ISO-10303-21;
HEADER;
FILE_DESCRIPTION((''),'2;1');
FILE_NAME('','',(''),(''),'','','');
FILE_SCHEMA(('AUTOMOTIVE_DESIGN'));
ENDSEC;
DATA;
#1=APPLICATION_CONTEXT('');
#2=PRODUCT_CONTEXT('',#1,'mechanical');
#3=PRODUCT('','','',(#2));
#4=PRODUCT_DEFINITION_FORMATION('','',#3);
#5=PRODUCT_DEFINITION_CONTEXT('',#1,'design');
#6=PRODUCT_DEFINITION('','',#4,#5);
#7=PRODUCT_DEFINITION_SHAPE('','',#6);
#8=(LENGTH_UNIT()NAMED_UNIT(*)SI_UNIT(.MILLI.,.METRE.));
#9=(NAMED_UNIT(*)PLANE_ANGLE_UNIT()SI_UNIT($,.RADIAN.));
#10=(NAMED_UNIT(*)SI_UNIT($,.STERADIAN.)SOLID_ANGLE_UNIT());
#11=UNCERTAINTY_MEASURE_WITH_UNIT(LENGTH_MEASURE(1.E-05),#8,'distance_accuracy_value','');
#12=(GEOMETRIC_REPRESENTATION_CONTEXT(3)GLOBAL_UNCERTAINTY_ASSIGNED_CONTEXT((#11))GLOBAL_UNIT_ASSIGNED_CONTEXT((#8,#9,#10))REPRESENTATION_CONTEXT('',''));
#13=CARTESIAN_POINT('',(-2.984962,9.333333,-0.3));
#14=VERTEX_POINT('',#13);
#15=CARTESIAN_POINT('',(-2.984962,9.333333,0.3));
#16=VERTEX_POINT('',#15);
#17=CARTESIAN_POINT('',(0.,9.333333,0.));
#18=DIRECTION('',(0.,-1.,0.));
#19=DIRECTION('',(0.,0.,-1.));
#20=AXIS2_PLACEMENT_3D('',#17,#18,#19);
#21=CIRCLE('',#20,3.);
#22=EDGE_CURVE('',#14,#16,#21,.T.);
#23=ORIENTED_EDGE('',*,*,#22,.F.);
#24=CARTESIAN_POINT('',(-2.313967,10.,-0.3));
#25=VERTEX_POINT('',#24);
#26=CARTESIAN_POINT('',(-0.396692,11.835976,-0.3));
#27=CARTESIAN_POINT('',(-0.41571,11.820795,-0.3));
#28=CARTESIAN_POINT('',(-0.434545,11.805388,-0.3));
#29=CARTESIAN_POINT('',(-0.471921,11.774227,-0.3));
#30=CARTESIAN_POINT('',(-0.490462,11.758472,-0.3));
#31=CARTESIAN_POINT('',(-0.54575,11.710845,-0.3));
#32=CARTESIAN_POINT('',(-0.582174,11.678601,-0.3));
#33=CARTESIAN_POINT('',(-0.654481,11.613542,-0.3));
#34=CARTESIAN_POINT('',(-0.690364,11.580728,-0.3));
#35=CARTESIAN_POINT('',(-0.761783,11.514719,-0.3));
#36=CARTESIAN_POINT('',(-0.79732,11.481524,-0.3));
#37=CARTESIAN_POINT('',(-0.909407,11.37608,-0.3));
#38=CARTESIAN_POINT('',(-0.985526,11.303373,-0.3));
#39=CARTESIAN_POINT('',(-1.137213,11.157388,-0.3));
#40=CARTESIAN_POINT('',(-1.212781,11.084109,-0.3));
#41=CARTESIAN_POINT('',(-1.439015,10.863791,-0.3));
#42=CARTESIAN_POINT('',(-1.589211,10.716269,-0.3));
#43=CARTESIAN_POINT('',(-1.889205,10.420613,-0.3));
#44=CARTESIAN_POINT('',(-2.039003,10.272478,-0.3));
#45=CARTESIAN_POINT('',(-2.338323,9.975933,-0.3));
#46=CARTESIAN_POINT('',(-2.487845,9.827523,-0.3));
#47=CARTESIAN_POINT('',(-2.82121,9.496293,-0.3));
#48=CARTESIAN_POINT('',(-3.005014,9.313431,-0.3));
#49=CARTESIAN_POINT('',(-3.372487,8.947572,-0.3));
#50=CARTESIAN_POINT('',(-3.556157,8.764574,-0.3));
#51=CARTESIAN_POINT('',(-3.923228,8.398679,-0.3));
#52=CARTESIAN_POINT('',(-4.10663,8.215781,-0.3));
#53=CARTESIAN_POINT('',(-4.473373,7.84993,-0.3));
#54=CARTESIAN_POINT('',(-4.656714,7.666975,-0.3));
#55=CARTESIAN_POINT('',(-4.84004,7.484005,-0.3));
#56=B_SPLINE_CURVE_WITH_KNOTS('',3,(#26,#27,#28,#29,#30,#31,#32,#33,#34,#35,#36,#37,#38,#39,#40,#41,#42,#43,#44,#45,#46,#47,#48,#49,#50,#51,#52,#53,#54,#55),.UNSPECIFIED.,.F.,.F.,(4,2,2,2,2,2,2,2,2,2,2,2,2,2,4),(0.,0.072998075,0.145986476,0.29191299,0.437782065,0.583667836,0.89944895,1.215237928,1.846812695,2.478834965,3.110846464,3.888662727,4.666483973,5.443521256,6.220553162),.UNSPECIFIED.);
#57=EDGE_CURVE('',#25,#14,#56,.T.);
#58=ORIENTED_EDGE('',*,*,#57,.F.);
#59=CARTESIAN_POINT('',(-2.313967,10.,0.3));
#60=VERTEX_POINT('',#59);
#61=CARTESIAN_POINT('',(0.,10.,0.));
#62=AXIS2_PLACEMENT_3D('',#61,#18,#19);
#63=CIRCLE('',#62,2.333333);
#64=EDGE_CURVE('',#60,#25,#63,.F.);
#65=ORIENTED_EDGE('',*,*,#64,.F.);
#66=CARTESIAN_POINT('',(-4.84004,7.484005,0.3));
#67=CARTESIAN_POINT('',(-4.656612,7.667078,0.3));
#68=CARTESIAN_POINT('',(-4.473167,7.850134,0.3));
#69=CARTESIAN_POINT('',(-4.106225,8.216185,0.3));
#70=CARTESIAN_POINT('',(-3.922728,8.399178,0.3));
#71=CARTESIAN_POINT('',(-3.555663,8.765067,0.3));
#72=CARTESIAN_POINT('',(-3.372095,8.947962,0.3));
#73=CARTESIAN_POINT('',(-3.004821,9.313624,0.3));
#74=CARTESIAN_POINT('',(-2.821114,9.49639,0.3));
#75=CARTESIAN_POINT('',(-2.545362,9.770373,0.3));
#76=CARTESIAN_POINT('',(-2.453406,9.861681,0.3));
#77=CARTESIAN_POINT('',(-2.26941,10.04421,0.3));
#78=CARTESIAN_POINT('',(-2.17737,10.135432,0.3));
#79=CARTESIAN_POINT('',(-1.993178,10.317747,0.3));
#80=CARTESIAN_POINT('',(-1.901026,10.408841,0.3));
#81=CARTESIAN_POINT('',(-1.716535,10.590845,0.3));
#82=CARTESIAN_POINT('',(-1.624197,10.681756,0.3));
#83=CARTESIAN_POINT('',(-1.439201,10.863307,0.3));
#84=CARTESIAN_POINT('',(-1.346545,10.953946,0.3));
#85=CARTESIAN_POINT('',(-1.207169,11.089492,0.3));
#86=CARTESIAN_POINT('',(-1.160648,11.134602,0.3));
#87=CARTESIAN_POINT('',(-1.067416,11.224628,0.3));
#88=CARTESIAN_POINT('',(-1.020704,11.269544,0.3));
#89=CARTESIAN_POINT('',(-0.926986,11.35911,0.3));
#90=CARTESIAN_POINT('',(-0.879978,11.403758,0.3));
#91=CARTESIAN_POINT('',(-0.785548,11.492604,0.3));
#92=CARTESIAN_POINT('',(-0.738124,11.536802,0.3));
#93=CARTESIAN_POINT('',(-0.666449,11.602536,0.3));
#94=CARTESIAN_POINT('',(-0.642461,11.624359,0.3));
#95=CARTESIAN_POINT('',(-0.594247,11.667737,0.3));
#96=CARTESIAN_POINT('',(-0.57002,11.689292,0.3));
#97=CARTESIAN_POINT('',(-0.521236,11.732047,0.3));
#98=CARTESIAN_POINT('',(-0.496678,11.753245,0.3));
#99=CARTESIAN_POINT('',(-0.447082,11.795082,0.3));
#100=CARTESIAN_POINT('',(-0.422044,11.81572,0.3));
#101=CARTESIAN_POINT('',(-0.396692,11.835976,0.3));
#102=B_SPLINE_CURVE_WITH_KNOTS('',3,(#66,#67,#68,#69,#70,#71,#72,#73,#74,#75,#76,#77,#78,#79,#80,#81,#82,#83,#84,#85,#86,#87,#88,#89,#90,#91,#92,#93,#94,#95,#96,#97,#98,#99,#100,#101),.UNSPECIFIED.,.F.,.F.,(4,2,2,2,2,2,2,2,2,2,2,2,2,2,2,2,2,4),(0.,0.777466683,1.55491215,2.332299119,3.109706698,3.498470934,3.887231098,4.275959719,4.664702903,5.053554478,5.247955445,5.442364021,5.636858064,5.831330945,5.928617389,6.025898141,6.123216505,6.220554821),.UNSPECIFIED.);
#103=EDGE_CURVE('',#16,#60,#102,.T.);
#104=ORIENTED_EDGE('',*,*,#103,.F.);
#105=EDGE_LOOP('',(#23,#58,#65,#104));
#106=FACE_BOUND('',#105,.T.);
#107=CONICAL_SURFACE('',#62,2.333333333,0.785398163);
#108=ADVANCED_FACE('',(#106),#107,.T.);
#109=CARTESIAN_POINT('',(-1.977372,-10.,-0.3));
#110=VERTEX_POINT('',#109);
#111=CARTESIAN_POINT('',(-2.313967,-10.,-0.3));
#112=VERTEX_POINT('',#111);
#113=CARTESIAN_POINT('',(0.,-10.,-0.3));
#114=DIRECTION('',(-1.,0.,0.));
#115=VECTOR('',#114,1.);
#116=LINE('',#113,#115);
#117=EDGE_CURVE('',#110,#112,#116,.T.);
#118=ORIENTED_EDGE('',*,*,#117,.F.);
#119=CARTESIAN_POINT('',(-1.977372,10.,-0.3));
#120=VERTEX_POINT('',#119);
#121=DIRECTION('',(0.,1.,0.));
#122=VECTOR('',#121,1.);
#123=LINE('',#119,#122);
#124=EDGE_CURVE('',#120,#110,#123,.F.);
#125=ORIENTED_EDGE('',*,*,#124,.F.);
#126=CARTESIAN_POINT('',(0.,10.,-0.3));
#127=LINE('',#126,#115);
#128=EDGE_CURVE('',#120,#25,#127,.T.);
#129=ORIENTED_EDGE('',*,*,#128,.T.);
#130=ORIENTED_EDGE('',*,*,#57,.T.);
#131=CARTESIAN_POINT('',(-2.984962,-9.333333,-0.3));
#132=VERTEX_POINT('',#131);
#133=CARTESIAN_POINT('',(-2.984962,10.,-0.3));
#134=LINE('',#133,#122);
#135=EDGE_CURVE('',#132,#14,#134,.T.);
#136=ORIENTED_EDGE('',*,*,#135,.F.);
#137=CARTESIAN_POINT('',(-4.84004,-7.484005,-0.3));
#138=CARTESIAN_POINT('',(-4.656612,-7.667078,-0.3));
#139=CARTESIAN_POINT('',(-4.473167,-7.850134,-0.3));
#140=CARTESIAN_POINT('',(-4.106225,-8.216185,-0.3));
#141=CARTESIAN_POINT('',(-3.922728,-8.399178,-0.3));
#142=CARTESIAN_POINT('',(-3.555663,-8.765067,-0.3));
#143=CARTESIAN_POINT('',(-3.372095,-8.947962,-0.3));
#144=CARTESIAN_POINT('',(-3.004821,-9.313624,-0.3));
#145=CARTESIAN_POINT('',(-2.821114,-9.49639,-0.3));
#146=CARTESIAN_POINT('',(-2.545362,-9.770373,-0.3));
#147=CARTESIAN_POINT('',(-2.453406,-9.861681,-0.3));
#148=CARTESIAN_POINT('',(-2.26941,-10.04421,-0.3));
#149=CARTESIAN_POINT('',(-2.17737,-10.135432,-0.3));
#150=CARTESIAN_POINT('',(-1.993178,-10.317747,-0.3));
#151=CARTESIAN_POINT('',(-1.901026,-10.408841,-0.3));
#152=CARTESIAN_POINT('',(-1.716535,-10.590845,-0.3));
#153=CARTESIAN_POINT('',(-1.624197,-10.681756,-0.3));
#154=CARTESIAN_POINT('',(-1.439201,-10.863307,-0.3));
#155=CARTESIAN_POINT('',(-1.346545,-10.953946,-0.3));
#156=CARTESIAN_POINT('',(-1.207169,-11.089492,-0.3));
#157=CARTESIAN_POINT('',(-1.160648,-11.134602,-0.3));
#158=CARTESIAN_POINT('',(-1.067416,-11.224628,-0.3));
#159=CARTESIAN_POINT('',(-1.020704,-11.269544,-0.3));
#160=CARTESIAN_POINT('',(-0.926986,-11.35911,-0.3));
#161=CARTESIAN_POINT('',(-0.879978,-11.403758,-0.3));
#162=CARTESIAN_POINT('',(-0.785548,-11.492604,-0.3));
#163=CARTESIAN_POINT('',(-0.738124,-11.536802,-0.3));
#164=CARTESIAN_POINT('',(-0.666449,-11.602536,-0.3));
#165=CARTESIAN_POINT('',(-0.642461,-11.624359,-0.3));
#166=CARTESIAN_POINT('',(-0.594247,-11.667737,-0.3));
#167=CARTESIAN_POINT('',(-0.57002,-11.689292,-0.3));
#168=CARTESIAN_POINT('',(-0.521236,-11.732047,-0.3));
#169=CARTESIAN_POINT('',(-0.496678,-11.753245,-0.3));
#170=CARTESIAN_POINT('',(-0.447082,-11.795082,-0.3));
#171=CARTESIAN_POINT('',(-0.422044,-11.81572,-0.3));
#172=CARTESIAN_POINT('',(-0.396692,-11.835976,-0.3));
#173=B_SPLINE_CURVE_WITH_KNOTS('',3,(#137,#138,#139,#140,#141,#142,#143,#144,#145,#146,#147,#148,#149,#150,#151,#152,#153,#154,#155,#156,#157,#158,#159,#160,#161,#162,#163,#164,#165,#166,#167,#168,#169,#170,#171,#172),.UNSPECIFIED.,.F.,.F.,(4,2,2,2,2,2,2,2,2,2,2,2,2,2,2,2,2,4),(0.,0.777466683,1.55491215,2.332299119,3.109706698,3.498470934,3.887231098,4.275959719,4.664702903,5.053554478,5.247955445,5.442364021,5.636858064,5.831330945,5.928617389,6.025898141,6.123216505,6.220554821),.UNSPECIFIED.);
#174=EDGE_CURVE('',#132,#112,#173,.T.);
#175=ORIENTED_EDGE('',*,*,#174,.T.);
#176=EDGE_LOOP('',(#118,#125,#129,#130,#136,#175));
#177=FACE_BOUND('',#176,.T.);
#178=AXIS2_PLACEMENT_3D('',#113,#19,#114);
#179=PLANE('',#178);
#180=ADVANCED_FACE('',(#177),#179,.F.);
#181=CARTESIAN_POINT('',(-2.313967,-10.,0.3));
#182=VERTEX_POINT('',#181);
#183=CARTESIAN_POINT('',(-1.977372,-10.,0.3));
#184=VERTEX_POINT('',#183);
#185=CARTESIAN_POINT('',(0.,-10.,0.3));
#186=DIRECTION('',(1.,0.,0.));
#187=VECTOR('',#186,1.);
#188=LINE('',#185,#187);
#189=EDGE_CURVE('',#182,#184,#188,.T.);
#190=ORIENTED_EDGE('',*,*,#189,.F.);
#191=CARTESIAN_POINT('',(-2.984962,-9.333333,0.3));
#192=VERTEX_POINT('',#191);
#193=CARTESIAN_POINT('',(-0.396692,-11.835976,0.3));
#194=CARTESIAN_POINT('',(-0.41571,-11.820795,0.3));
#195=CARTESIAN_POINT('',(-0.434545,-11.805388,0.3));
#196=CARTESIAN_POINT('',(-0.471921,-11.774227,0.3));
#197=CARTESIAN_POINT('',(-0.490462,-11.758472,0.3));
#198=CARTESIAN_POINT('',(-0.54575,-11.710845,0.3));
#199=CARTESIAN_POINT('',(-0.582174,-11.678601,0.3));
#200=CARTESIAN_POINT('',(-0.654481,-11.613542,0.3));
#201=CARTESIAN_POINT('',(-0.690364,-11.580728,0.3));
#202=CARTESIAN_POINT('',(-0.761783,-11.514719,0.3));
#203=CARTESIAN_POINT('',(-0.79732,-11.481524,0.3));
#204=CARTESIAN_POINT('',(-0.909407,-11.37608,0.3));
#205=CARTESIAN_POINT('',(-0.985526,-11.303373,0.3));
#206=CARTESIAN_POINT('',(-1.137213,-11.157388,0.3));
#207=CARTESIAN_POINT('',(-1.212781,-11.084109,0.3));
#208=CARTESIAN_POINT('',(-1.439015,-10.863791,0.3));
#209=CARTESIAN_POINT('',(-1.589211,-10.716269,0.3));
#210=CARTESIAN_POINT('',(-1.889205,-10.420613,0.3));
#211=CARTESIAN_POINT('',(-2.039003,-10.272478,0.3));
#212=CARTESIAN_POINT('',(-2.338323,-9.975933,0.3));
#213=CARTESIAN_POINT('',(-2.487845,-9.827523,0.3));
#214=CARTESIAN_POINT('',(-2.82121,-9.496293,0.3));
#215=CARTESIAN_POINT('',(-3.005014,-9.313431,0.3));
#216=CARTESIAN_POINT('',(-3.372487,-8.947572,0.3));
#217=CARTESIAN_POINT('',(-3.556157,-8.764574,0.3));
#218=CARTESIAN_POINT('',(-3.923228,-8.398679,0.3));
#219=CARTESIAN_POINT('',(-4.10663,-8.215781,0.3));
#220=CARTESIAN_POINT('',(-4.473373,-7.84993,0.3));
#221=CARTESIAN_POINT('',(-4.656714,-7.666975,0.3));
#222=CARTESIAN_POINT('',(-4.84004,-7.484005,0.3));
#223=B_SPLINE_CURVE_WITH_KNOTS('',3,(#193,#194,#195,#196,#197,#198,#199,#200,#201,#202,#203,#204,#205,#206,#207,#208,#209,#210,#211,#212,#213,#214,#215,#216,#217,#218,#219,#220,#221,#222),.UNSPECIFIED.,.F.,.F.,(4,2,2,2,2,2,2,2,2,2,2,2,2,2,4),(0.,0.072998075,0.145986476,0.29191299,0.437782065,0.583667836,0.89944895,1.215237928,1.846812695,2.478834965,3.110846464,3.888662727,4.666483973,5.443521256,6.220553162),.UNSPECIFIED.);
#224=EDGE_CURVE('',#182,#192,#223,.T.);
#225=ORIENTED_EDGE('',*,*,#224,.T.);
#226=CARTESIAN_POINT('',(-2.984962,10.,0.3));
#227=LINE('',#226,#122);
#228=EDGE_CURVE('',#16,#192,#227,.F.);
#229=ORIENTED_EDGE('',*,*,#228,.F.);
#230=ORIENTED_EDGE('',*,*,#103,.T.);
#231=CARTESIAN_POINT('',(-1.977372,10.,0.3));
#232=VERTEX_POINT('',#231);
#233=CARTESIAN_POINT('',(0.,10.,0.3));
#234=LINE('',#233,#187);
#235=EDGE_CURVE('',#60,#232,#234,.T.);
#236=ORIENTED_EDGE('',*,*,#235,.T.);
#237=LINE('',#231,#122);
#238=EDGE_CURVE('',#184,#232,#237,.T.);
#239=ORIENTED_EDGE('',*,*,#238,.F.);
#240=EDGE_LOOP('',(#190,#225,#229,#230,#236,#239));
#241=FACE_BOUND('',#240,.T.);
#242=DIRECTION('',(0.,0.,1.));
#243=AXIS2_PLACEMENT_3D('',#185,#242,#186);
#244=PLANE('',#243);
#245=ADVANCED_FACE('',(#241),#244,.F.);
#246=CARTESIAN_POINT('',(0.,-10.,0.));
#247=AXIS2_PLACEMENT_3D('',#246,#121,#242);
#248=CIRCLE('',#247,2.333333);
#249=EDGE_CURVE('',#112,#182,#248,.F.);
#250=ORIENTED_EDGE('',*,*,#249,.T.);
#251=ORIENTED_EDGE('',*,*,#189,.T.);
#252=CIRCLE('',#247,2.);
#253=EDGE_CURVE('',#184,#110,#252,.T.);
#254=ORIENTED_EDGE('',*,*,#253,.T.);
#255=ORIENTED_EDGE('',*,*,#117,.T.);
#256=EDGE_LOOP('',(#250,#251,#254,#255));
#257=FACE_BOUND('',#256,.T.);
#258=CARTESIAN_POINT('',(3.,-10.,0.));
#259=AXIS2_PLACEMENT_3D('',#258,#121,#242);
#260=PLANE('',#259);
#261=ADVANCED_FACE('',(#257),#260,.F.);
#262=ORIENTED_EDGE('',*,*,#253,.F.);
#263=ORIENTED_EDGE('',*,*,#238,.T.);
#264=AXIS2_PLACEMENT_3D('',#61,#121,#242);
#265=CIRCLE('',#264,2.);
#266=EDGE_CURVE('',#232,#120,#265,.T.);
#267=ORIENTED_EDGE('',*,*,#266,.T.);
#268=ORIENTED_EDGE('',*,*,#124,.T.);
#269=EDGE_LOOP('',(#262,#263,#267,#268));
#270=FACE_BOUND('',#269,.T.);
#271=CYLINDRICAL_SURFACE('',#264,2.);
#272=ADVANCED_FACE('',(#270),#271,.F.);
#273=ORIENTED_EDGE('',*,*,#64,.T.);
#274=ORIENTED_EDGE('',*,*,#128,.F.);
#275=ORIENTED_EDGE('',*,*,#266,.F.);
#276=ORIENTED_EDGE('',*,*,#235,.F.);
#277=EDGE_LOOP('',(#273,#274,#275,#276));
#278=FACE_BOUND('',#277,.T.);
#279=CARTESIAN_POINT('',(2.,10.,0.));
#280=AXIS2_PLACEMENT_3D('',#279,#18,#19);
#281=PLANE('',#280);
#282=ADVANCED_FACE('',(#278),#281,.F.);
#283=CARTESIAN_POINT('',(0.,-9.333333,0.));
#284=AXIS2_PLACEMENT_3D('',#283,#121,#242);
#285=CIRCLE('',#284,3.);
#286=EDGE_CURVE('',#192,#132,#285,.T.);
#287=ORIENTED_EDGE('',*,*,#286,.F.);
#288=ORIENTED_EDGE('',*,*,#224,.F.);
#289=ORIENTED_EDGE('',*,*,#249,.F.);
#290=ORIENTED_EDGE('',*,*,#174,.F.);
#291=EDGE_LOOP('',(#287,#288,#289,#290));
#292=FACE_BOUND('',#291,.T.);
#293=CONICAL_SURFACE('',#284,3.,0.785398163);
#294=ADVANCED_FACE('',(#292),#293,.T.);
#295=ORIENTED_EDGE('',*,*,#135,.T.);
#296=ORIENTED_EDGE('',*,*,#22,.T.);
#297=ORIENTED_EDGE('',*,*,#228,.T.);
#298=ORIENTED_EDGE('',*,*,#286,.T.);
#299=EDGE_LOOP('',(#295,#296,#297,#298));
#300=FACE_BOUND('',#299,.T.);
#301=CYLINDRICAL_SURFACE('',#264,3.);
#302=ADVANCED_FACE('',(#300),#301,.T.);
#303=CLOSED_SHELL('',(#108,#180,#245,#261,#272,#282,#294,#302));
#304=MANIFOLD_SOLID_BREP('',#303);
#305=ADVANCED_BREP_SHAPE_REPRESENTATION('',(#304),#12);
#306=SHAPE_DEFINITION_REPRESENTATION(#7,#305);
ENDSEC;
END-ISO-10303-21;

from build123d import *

# Parameters (mm, degrees)
ESQUISSE1_W                  = 1
ESQUISSE1_H                  = 20
ENL_V_MAT_EXTRU_1_DEPTH      = 11.862780491
ENL_V_MAT_EXTRU_1_DEPTH_BACK = 11.862780491
ESQUISSE2_W                  = 3
ESQUISSE2_H                  = 0.6


with BuildPart() as part:
    # Esquisse1 → Base-Révolution (revolve)
    with BuildSketch(Plane.XY, mode=Mode.PRIVATE) as base_r_volution_sk:
        with Locations((2.5, 0)):
            Rectangle(ESQUISSE1_W, ESQUISSE1_H)
    revolve(base_r_volution_sk.sketch.rotate(Axis((0, 10, 0), (0, -1, 0)), 90), axis=Axis((0, 10, 0), (0, -1, 0)))

    # Chanfrein1: read off the stored shape, not the designer's step
    # Chanfrein1 outline → Chanfrein1 (revolve, cut)
    with BuildSketch(Plane.XY):
        Polygon((3, 10), (2.333333333, 10), (3, 9.333333333), align=None)
        Polygon((3, -10), (3, -9.333333333), (2.333333333, -10), align=None)
    revolve(axis=Axis((0, 0, 0), (0, 1, 0)), mode=Mode.SUBTRACT)

    # Esquisse2 → Enlèv. mat.-Extru.1 (cut, two sides: drawn at the far end of the back side and taken through both)
    with BuildSketch(Plane(origin=(0, 0, 0), x_dir=(-1, 0, 0), z_dir=(0, 1, 0)).offset(-ENL_V_MAT_EXTRU_1_DEPTH_BACK)):
        with Locations((1.5, 0)):
            Rectangle(ESQUISSE2_W, ESQUISSE2_H)
    extrude(amount=ENL_V_MAT_EXTRU_1_DEPTH + ENL_V_MAT_EXTRU_1_DEPTH_BACK, mode=Mode.SUBTRACT)


solid = part.part
